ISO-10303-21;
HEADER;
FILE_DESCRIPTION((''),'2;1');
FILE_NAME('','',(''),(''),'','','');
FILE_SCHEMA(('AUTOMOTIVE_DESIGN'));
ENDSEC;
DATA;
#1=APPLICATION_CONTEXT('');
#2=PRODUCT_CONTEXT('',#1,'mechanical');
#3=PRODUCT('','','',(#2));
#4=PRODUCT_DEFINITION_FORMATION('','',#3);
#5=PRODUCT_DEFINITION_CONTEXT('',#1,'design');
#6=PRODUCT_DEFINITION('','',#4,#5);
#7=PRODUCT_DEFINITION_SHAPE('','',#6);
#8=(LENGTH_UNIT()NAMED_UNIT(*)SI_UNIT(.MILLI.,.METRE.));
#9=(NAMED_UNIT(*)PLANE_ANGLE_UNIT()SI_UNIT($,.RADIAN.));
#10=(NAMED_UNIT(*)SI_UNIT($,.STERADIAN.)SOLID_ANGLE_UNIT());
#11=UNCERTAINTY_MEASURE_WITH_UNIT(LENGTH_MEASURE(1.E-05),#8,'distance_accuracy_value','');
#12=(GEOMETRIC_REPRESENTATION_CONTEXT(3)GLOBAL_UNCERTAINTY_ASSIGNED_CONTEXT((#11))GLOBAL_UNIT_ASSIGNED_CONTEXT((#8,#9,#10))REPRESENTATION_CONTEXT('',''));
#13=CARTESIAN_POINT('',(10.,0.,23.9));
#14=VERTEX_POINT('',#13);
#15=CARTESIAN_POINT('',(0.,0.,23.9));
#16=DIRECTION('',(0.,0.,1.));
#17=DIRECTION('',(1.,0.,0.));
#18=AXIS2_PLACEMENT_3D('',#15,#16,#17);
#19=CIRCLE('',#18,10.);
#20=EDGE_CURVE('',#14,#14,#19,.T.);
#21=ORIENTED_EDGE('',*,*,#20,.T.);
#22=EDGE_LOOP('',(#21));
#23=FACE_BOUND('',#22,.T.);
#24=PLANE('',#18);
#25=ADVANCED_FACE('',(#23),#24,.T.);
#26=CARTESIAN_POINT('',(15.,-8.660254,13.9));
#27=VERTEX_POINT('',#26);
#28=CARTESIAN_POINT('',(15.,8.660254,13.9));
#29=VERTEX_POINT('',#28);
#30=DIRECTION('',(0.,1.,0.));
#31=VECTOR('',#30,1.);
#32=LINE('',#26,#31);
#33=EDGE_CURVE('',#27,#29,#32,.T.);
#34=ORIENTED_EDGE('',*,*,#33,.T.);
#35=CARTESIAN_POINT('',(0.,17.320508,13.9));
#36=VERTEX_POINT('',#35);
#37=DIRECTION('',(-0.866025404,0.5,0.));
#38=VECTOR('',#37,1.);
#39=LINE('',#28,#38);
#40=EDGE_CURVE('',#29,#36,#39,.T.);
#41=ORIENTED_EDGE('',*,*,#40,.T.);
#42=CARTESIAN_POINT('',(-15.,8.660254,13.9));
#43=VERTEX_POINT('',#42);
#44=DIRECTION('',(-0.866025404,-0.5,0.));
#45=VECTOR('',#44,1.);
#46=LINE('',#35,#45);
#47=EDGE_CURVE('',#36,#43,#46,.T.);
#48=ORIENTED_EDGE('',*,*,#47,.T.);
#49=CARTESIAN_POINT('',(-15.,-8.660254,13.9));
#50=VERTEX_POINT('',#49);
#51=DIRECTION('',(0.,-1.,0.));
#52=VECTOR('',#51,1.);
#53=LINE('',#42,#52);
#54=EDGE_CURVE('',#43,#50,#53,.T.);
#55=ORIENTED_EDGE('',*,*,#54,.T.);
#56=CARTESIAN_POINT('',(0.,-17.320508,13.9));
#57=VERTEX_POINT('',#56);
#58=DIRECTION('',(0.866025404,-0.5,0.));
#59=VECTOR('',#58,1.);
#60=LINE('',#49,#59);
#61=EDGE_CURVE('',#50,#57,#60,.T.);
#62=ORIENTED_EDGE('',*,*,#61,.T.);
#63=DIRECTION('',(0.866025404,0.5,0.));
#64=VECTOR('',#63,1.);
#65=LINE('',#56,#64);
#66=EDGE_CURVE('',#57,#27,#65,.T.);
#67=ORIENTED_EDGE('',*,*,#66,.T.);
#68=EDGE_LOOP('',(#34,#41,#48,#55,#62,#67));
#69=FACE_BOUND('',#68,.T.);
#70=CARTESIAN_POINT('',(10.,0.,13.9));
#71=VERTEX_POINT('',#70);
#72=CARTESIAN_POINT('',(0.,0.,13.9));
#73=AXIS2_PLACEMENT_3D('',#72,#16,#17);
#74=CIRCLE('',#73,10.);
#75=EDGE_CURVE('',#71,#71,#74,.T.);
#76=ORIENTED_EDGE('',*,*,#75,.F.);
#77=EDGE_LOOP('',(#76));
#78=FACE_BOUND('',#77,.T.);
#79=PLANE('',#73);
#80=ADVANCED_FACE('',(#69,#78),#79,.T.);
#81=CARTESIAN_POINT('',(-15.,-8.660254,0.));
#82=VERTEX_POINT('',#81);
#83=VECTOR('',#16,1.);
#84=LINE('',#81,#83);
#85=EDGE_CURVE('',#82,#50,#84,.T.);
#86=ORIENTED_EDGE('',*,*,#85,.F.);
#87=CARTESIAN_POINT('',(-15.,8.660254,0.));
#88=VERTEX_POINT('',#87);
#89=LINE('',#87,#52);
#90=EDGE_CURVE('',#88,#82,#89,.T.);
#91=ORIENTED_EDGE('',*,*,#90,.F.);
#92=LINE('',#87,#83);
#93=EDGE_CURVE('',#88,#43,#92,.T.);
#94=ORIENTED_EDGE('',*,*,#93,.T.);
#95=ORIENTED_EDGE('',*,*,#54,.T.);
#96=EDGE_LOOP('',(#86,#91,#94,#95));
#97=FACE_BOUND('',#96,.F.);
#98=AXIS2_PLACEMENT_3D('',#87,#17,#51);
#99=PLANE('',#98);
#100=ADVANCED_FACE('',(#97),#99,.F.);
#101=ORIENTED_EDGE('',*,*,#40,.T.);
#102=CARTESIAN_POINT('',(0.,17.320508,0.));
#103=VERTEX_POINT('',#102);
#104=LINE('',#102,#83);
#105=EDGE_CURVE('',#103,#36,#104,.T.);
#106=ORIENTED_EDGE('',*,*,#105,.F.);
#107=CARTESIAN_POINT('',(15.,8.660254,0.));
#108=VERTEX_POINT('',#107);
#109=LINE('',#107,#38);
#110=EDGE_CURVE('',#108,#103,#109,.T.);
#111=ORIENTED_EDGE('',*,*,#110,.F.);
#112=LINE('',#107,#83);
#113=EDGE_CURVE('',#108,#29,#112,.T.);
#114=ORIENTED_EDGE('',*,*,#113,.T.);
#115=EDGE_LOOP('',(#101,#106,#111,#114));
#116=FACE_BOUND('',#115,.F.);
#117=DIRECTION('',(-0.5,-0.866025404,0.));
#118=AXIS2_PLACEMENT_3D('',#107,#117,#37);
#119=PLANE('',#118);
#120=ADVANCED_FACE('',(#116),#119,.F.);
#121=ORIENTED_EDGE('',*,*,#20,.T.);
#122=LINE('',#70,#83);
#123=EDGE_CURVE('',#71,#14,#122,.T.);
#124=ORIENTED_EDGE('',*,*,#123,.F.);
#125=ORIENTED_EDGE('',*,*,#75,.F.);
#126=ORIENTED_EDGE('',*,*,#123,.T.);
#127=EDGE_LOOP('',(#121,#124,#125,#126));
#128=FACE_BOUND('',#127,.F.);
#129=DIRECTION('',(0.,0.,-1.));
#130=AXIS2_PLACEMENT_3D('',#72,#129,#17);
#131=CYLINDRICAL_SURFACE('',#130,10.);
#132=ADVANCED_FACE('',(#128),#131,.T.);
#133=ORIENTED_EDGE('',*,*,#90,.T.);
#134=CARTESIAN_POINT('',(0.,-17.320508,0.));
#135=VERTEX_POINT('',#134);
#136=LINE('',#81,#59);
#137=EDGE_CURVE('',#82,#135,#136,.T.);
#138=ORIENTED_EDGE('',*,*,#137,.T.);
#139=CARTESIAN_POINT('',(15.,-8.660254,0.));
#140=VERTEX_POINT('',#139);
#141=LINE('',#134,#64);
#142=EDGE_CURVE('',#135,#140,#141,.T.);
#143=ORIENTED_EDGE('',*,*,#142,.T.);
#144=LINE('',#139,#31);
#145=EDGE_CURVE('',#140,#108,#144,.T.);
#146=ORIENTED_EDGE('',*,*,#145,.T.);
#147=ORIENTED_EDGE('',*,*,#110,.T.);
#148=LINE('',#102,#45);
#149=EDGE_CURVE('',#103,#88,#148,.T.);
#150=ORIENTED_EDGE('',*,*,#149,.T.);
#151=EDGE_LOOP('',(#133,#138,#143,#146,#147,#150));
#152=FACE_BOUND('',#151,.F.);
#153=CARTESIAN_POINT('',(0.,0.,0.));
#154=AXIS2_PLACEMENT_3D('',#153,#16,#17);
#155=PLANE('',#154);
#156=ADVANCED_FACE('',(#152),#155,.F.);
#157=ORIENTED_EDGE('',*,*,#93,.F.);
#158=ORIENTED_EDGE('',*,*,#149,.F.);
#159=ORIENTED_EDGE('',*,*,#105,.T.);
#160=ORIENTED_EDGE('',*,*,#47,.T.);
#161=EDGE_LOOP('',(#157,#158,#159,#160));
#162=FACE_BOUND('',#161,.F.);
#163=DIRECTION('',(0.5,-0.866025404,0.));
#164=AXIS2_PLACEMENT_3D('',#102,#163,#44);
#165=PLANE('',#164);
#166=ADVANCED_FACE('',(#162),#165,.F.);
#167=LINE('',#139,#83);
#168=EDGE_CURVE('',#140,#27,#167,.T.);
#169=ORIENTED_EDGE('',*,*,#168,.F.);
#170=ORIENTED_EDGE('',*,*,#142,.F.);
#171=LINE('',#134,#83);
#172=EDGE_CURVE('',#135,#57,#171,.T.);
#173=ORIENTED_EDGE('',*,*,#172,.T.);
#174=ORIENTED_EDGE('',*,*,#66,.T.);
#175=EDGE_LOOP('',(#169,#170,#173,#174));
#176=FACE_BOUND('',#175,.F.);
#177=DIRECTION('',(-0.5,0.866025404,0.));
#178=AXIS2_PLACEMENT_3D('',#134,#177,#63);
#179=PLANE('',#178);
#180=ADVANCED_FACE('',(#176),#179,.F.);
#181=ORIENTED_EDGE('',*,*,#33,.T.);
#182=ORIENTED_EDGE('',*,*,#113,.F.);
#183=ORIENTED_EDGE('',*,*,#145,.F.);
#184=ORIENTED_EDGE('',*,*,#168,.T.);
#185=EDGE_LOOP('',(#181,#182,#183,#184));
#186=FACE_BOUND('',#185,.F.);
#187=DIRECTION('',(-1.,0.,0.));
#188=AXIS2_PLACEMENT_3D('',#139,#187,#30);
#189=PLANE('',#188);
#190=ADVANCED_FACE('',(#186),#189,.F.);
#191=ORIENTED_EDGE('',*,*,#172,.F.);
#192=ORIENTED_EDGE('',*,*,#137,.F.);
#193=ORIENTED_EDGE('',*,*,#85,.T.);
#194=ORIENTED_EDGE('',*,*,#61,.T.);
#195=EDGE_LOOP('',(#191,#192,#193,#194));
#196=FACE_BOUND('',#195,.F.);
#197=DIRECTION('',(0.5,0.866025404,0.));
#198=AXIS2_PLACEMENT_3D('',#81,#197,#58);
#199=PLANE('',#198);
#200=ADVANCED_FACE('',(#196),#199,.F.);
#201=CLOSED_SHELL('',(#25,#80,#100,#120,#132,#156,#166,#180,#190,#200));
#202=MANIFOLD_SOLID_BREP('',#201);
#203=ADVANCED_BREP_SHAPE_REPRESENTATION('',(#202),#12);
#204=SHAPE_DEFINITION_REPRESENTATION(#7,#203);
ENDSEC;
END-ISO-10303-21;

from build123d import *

# Parameters (mm, degrees)
F1_DEPTH = 13.9
F2_R     = 10
F3_DEPTH = 10


# Not quite as in the source:
# - the program builds the solid bodies; features that only make, move or delete a surface that nothing else refers to are left out


with BuildPart() as f1:
    # F0 (on Top) → F1 (new body)
    with BuildSketch(Plane.XY):
        Polygon((15, 8.6602540378), (0, 17.3205080757), (-15, 8.6602540378), (-15, -8.6602540378), (0, -17.3205080757), (15, -8.6602540378), align=None)
    extrude(amount=F1_DEPTH)

    # F2 (on face) → F3 (join)
    with BuildSketch(Plane.XY.offset(13.9)):
        Circle(F2_R)
    extrude(amount=F3_DEPTH)


solid = f1.part
